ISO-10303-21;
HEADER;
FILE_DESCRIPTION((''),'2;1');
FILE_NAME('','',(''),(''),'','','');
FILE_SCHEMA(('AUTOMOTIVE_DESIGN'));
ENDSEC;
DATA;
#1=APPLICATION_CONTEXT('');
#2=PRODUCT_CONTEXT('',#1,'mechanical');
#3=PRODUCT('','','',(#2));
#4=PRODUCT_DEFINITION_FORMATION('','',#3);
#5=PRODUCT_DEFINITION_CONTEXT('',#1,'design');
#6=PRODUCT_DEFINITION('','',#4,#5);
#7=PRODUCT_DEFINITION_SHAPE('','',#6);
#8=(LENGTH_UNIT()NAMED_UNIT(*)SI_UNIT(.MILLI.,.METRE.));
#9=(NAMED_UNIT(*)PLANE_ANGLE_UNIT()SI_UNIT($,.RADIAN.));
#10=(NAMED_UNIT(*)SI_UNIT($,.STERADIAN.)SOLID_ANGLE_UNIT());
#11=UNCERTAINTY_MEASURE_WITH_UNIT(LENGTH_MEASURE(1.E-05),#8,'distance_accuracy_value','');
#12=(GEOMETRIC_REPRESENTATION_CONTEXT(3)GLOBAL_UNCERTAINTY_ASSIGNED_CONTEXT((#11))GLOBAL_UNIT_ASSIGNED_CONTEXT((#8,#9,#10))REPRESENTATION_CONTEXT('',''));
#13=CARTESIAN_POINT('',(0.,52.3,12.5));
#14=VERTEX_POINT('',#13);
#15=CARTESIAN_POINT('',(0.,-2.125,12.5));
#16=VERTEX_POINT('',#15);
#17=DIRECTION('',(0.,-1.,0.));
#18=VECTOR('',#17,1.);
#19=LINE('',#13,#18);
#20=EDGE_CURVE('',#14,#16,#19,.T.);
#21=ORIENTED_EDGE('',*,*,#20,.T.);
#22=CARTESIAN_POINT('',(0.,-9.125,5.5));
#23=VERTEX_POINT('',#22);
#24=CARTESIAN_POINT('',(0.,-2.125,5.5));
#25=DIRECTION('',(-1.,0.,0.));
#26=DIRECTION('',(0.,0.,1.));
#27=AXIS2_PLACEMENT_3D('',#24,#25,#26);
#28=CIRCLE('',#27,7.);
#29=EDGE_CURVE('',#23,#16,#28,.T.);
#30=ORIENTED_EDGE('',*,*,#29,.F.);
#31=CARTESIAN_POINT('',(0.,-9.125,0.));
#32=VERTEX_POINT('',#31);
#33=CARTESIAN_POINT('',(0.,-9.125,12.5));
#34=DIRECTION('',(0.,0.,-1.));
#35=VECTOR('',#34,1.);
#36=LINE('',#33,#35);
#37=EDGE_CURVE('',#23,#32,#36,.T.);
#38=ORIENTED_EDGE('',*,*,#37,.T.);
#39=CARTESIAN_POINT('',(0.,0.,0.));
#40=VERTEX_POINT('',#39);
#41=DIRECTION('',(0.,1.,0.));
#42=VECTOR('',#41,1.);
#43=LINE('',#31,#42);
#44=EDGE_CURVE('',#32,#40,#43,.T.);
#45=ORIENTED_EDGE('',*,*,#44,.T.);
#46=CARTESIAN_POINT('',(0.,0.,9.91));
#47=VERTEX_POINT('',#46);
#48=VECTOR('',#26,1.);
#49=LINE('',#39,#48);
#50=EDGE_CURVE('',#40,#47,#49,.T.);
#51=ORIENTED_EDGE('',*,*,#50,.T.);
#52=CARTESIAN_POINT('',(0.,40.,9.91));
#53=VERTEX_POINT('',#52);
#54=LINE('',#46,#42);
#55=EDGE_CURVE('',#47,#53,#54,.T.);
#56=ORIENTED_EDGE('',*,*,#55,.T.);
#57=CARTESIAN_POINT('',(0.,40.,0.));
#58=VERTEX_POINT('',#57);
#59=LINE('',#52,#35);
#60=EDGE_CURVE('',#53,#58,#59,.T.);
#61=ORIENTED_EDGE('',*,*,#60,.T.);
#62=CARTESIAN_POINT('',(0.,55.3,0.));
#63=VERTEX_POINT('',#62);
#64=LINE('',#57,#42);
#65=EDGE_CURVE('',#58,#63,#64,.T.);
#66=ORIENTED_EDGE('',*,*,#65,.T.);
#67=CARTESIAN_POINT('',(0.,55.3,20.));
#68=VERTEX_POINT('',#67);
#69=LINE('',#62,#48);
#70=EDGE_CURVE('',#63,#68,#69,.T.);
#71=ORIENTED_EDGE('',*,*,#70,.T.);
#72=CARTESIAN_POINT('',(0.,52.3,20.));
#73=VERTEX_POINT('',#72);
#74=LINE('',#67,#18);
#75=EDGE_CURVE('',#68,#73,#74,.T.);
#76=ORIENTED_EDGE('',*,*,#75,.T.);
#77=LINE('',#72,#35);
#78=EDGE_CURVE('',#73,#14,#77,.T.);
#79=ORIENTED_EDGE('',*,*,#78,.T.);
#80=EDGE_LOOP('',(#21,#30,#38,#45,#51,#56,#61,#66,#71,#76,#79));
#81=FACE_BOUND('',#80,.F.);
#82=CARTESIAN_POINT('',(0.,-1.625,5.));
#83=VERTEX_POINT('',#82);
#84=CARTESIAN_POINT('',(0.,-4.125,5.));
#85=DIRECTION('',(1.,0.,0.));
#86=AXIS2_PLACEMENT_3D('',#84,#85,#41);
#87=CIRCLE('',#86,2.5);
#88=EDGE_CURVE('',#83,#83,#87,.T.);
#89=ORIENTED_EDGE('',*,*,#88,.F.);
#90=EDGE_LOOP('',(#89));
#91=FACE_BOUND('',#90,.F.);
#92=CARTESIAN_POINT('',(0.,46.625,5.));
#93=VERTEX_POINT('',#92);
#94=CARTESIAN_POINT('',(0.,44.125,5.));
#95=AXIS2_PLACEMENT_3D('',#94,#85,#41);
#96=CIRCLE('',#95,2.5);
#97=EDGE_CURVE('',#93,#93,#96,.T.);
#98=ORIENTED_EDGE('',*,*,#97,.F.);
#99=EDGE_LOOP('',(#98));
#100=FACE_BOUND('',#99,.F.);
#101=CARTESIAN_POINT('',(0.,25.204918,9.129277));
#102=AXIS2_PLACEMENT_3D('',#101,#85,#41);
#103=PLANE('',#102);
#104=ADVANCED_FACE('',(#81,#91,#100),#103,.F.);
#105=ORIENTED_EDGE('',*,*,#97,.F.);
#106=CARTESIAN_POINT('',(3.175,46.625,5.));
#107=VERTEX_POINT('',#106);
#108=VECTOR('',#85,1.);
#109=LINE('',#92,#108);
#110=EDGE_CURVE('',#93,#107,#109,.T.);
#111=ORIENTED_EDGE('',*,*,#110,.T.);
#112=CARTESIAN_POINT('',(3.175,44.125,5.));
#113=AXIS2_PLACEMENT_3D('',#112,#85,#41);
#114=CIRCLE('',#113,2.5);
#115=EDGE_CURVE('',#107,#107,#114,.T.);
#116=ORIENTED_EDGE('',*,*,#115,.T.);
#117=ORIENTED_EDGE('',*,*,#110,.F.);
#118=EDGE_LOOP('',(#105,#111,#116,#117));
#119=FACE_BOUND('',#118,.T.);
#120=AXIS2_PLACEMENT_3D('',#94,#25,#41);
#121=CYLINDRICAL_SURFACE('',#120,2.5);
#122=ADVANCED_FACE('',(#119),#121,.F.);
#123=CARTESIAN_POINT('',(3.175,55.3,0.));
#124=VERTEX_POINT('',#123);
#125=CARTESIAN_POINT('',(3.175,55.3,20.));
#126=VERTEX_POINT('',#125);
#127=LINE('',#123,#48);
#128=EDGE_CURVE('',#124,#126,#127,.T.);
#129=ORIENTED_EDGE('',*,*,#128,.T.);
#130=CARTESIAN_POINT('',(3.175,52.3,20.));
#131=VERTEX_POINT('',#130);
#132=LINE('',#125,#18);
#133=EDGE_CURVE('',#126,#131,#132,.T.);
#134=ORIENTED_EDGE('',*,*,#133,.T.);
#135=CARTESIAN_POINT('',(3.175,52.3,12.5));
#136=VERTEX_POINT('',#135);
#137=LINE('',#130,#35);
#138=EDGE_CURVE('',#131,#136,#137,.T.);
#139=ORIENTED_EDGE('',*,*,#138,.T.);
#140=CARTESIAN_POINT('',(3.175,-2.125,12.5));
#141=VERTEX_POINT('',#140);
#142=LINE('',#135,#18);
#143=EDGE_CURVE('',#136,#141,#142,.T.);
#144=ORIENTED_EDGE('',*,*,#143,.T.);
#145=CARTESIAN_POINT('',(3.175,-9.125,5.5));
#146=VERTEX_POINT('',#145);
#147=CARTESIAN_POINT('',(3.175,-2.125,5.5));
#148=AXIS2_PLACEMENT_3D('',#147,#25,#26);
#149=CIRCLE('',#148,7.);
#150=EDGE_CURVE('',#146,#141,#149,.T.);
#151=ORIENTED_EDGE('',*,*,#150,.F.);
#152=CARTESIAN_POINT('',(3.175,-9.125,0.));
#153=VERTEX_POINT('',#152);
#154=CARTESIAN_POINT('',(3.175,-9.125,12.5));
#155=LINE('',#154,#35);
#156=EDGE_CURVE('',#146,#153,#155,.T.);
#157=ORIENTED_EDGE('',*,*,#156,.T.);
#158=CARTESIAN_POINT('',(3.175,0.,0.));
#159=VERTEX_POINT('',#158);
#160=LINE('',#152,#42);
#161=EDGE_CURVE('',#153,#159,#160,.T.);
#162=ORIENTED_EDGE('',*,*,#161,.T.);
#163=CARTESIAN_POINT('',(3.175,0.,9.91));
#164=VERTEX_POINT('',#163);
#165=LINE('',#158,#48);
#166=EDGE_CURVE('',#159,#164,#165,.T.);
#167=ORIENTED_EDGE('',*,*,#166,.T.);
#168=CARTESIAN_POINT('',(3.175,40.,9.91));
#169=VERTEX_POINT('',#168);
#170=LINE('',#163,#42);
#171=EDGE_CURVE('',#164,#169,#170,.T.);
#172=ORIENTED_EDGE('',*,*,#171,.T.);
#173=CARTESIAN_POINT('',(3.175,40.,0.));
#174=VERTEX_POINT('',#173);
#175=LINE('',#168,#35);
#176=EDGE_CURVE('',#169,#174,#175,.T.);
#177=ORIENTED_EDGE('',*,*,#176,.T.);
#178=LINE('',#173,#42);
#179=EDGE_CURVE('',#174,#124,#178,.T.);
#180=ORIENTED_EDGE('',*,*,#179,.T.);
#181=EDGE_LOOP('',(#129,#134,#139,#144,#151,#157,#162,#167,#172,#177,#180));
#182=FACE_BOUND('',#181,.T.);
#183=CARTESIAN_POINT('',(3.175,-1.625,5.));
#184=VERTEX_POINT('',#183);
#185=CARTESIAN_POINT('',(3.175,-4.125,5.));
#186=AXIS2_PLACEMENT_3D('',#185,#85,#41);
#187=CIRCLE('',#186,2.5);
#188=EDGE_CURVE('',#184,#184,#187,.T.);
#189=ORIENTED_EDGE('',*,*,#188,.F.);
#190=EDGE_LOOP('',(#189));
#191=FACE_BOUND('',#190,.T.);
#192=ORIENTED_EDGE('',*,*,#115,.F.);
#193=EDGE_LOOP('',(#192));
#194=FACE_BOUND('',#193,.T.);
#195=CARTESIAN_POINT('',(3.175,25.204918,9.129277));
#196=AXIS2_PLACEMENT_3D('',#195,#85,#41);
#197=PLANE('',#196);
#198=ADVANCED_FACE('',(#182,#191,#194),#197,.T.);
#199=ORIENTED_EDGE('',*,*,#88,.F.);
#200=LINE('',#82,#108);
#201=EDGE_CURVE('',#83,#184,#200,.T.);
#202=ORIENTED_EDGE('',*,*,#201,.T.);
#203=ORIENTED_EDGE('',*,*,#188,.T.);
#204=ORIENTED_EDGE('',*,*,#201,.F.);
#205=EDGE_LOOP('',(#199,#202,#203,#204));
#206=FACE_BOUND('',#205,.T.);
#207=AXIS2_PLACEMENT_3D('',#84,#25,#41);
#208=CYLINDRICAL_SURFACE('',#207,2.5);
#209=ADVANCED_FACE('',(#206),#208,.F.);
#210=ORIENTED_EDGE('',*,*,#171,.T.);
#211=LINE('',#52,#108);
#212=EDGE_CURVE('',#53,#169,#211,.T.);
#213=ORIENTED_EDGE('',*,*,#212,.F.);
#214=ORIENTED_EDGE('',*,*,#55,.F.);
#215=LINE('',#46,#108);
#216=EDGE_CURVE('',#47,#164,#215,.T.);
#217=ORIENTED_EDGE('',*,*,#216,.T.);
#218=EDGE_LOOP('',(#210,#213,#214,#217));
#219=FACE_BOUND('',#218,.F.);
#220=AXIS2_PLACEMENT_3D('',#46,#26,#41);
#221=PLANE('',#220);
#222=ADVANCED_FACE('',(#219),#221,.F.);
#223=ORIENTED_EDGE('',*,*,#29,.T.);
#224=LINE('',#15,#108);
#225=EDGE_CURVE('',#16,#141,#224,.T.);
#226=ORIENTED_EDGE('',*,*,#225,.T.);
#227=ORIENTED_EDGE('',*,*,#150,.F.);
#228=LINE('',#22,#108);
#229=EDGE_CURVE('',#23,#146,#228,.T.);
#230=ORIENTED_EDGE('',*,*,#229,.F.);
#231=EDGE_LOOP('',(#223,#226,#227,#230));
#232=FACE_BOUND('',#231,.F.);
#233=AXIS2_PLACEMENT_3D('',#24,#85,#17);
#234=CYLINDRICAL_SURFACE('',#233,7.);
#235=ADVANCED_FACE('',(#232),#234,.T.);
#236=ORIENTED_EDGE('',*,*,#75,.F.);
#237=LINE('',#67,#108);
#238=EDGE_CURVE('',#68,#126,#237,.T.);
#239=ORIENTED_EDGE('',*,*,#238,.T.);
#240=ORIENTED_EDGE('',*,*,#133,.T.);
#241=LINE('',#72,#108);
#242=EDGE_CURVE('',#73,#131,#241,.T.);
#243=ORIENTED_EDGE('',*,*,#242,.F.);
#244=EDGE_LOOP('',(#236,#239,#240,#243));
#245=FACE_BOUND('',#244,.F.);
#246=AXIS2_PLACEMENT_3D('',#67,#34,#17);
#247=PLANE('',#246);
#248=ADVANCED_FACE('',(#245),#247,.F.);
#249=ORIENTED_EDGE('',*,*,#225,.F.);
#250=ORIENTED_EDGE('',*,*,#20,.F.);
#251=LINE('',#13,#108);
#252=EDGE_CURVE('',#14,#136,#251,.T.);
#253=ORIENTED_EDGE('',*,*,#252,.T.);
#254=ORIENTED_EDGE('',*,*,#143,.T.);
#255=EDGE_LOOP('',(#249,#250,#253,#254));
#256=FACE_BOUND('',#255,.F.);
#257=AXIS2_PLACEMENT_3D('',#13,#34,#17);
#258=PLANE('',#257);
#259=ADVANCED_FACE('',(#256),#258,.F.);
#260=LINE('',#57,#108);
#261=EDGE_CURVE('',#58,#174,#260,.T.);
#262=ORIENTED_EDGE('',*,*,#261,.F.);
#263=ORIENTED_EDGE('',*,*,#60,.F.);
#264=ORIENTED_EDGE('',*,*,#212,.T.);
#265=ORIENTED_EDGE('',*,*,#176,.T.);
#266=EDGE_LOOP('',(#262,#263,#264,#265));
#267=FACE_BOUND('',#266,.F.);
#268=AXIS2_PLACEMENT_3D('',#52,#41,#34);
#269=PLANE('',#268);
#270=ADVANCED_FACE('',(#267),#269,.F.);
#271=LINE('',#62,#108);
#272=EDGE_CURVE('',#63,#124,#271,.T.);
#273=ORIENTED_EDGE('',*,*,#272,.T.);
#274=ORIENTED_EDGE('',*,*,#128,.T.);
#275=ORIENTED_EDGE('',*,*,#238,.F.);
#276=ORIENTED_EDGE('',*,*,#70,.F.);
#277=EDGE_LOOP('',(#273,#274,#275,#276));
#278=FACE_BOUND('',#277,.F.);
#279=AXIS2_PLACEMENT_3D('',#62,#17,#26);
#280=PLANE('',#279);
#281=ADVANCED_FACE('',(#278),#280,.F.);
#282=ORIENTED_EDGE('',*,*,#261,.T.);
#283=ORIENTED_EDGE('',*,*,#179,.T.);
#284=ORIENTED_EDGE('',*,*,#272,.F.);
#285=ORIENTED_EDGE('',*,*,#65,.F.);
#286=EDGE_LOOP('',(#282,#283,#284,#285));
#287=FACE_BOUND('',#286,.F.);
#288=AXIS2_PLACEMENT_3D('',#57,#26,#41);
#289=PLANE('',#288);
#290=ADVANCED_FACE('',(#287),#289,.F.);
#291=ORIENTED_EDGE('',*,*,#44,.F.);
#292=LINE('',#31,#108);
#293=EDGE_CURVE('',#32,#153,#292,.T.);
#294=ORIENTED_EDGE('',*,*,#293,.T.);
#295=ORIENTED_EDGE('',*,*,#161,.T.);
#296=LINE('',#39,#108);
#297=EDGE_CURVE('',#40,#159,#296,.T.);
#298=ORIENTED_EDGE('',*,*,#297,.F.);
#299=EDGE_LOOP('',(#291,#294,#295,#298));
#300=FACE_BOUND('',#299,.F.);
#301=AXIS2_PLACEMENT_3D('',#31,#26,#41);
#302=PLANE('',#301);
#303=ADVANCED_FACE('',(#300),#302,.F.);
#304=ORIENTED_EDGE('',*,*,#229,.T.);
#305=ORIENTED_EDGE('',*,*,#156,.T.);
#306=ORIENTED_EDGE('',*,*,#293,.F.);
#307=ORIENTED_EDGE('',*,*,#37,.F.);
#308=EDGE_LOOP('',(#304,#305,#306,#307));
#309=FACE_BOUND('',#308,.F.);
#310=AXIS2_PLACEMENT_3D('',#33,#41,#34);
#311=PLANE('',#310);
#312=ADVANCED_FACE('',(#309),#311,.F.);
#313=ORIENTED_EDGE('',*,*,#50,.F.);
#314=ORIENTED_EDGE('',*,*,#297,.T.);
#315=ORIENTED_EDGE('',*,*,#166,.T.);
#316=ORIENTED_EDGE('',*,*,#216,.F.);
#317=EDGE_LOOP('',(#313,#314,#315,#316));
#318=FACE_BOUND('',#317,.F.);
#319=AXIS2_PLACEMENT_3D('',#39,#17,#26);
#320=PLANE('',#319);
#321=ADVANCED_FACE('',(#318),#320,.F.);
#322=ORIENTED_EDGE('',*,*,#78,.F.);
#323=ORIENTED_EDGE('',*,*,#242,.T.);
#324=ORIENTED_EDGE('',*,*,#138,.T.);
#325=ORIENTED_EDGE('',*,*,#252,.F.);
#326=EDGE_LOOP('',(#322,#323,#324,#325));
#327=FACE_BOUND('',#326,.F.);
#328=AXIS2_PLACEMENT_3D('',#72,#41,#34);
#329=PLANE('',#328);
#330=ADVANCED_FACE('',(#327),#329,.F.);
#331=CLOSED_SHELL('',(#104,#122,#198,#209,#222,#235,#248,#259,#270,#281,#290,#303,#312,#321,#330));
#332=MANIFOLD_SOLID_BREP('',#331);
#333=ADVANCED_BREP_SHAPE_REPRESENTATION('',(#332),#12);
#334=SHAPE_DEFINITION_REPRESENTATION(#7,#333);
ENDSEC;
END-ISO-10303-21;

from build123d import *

# Parameters (mm, degrees)
F0_R     = 2.5
F1_DEPTH = 3.175
F2_R     = 7


# Not quite as in the source:
# - a length typed as a fraction of an inch, garbled in the dataset ("3 / 203.2 mm" for 3/8 in), is restored


with BuildPart() as f1:
    # F0 (on Right) → F1 (new body)
    with BuildSketch(Plane.YZ):
        Polygon((-9.125, 0), (0, 0), (0, 9.91), (20, 9.91), (40, 9.91), (40, 0), (52.3, 0), (55.3, 0), (55.3, 20), (52.3, 20), (52.3, 12.5), (-9.125, 12.5), align=None)
        with Locations((-4.125, 5)):
            Circle(F0_R, mode=Mode.SUBTRACT)
        with Locations((44.125, 5)):
            Circle(F0_R, mode=Mode.SUBTRACT)
    extrude(amount=F1_DEPTH)

    # F2
    f2_edges = [f1.edges().sort_by_distance(p)[0] for p in [
        (1.5875, -9.125, 12.5),
    ]]
    fillet(f2_edges, radius=F2_R)


solid = f1.part
